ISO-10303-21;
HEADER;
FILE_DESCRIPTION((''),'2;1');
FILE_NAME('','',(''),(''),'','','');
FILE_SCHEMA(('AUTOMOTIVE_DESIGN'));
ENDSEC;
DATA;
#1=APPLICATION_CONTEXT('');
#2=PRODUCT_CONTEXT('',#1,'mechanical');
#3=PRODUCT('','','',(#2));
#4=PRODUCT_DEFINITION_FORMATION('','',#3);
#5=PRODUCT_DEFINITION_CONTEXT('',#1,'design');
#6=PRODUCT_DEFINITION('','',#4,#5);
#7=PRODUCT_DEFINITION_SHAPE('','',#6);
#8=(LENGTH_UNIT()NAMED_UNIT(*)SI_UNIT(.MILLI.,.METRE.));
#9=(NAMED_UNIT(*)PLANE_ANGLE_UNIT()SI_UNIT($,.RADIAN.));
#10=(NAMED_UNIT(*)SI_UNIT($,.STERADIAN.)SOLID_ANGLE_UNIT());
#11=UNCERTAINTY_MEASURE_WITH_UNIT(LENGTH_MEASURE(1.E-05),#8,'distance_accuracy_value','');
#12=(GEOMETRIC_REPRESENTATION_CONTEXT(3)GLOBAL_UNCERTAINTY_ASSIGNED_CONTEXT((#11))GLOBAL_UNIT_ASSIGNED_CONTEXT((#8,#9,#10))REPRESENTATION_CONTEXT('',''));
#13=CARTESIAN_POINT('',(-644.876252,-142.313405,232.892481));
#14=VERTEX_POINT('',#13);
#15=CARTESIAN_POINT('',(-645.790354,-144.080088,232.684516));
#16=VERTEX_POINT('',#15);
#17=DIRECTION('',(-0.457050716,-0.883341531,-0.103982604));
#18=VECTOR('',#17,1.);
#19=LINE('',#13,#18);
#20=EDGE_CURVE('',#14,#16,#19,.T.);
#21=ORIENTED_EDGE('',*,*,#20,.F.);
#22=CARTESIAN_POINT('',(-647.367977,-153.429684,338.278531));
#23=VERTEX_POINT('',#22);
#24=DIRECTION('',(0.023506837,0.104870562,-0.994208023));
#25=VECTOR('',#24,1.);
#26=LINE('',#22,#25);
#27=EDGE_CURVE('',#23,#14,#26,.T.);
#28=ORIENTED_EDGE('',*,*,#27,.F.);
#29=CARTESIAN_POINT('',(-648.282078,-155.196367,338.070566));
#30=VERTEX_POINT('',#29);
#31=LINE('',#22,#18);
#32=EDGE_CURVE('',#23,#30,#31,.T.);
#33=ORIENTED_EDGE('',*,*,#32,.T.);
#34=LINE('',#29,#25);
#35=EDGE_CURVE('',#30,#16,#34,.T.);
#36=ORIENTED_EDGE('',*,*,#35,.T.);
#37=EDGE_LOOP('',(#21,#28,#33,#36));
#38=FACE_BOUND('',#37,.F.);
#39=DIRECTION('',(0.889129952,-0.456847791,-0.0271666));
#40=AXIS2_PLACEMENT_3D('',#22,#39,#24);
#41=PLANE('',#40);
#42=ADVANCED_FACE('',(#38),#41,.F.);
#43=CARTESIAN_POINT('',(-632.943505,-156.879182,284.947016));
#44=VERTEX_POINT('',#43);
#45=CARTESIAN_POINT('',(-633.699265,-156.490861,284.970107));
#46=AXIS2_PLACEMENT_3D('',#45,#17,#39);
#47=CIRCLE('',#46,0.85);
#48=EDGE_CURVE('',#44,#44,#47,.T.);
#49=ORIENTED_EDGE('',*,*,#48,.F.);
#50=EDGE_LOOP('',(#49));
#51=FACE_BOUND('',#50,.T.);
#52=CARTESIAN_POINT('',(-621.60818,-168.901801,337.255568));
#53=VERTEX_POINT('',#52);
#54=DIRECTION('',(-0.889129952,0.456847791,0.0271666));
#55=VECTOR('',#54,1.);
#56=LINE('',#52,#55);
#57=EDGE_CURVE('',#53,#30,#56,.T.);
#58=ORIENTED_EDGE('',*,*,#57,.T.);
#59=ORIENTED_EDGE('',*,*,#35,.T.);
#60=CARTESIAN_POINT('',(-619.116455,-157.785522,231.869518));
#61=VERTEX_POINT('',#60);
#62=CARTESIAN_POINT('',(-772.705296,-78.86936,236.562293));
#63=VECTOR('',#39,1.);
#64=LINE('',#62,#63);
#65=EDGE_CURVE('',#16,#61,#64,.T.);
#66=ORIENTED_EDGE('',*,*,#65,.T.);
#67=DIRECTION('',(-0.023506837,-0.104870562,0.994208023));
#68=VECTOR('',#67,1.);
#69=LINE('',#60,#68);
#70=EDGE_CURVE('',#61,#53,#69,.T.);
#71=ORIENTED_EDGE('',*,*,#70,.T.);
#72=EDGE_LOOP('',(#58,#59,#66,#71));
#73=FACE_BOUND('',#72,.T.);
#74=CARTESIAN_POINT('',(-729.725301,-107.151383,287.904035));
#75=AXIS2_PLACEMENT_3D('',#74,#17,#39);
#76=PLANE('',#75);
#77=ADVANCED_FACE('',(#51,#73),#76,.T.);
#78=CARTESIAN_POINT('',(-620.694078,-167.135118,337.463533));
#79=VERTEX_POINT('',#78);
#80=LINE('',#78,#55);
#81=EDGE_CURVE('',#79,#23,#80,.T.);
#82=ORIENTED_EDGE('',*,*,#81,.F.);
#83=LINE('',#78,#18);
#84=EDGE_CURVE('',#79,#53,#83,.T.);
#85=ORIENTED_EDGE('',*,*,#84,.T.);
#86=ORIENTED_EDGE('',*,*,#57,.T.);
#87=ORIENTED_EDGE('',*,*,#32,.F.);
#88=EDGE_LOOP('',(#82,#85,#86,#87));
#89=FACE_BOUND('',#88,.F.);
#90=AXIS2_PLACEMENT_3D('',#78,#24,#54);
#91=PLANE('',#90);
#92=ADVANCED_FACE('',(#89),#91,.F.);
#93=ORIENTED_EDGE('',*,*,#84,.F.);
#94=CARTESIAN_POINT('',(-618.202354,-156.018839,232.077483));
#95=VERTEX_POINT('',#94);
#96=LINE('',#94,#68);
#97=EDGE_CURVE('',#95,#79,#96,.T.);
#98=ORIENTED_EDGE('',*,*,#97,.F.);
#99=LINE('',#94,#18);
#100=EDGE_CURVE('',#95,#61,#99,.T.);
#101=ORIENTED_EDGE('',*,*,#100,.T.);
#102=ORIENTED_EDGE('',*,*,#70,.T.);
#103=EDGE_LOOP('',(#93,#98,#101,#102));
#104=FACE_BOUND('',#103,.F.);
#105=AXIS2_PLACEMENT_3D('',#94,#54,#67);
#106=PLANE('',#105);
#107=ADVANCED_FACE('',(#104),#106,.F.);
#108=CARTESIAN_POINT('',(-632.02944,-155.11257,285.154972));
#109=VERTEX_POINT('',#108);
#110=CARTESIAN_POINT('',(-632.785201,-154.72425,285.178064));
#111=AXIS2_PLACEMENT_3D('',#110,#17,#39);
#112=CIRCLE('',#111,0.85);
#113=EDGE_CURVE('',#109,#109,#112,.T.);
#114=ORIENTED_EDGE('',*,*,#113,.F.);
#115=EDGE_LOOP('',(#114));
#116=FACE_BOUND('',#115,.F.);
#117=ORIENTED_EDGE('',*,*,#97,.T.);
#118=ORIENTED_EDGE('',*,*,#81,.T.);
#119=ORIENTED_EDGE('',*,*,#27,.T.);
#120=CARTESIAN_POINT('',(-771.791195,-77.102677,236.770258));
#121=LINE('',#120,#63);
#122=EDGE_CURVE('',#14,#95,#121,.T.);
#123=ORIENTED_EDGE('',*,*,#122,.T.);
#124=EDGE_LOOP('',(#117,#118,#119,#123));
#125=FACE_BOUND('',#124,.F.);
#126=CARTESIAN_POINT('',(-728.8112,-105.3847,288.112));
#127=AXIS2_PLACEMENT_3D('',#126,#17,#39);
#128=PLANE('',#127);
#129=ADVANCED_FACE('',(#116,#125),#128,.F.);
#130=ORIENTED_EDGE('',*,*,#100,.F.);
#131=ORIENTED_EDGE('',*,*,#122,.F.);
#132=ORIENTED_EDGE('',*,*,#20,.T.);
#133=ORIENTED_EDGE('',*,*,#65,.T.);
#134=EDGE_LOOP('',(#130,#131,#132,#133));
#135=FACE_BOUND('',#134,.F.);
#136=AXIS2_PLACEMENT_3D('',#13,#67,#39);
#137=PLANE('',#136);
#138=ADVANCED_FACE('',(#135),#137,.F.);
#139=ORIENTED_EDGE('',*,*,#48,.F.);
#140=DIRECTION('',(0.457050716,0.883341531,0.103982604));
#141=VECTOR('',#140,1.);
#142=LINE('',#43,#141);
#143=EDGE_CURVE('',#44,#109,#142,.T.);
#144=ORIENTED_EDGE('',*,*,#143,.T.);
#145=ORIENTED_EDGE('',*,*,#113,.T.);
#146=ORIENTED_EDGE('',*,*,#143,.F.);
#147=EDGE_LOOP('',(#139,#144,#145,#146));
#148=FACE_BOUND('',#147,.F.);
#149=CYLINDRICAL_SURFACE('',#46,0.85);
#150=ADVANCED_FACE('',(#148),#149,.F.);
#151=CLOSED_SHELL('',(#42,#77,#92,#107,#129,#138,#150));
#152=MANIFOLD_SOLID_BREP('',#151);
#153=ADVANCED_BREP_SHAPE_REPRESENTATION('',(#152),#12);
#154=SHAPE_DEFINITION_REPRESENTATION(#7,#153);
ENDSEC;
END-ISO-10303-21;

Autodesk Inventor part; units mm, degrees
ref_plane "YZ Plane" through (0, 0, 0) normal (1, 0, 0) x (0, 1, 0)
ref_plane "XZ Plane" through (0, 0, 0) normal (0, 1, 0) x (-1, 0, 0)
ref_plane "XY Plane" through (0, 0, 0) normal (0, 0, 1) x (1, 0, 0)
ref_plane "Work Plane1" through (-728.8112, -105.3847, 288.112) normal (-0.4570507, -0.8833415, -0.1039826) x (0.88913, -0.4568478, -0.0271666)
sketch "Sketch1" plane through (-728.8112, -105.3847, 288.112) normal (-0.4570507, -0.8833415, -0.1039826) x (0.88913, -0.4568478, -0.0271666)
  line L0 (-49.7406, -45) -> (-49.7406, -53)
  line L1 (-49.7406, -53) -> (123, -53)
  line L2 (123, -53) -> (123, 53)
  line L3 (123, 53) -> (-49.7406, 53)
  line L4 (-49.7406, 53) -> (-49.7406, 45)
  line L5 (-49.7406, 45) -> (-91.8594, 45)
  line L6 (-91.8594, 45) -> (-91.8594, 53)
  line L7 (-91.8594, 53) -> (-123, 53)
  line L8 (-123, 53) -> (-123, -53)
  line L9 (-123, -53) -> (-91.8594, -53)
  line L10 (-91.8594, -53) -> (-91.8594, -45)
  line L11 (-91.8594, -45) -> (-49.7406, -45)
  line L12 (-95.4, -15.0028) -> (-111.4, -15.0028)
  line L13 (-111.4, -15.0028) -> (-111.4, 13.9972)
  line L14 (-111.4, 13.9972) -> (-95.4, 13.9972)
  line L15 (-95.4, 13.9972) -> (-95.4, -15.0028)
  line L16 (123, 53) -> (93, 53)
  line L17 (93, 53) -> (93, -53)
  line L18 (93, -53) -> (123, -53)
  line L19 (123, -53) -> (123, 53)
  point P0 (607.6902, -314.6271)
  dimension "d0" = 30
extrude "Extrusion1" add sketch "Sketch1" along normal blind 2 contours L17 L3 L2 L1
sketch "Sketch4" plane through (-729.7253, -107.1513, 287.9041) normal (-0.4570507, -0.8833415, -0.1039826) x (0.88913, -0.4568478, -0.0271666)
  circle A0 centre (108, 0) radius 0.85
  point P0 (607.6902, -314.6271)
extrude "Extrusion4" cut sketch "Sketch4" against normal up to next
thread "Thread1" size "M1.7x0.35" class "6H" standard "ISO Metric profile" full length
properties part number "Fram"
